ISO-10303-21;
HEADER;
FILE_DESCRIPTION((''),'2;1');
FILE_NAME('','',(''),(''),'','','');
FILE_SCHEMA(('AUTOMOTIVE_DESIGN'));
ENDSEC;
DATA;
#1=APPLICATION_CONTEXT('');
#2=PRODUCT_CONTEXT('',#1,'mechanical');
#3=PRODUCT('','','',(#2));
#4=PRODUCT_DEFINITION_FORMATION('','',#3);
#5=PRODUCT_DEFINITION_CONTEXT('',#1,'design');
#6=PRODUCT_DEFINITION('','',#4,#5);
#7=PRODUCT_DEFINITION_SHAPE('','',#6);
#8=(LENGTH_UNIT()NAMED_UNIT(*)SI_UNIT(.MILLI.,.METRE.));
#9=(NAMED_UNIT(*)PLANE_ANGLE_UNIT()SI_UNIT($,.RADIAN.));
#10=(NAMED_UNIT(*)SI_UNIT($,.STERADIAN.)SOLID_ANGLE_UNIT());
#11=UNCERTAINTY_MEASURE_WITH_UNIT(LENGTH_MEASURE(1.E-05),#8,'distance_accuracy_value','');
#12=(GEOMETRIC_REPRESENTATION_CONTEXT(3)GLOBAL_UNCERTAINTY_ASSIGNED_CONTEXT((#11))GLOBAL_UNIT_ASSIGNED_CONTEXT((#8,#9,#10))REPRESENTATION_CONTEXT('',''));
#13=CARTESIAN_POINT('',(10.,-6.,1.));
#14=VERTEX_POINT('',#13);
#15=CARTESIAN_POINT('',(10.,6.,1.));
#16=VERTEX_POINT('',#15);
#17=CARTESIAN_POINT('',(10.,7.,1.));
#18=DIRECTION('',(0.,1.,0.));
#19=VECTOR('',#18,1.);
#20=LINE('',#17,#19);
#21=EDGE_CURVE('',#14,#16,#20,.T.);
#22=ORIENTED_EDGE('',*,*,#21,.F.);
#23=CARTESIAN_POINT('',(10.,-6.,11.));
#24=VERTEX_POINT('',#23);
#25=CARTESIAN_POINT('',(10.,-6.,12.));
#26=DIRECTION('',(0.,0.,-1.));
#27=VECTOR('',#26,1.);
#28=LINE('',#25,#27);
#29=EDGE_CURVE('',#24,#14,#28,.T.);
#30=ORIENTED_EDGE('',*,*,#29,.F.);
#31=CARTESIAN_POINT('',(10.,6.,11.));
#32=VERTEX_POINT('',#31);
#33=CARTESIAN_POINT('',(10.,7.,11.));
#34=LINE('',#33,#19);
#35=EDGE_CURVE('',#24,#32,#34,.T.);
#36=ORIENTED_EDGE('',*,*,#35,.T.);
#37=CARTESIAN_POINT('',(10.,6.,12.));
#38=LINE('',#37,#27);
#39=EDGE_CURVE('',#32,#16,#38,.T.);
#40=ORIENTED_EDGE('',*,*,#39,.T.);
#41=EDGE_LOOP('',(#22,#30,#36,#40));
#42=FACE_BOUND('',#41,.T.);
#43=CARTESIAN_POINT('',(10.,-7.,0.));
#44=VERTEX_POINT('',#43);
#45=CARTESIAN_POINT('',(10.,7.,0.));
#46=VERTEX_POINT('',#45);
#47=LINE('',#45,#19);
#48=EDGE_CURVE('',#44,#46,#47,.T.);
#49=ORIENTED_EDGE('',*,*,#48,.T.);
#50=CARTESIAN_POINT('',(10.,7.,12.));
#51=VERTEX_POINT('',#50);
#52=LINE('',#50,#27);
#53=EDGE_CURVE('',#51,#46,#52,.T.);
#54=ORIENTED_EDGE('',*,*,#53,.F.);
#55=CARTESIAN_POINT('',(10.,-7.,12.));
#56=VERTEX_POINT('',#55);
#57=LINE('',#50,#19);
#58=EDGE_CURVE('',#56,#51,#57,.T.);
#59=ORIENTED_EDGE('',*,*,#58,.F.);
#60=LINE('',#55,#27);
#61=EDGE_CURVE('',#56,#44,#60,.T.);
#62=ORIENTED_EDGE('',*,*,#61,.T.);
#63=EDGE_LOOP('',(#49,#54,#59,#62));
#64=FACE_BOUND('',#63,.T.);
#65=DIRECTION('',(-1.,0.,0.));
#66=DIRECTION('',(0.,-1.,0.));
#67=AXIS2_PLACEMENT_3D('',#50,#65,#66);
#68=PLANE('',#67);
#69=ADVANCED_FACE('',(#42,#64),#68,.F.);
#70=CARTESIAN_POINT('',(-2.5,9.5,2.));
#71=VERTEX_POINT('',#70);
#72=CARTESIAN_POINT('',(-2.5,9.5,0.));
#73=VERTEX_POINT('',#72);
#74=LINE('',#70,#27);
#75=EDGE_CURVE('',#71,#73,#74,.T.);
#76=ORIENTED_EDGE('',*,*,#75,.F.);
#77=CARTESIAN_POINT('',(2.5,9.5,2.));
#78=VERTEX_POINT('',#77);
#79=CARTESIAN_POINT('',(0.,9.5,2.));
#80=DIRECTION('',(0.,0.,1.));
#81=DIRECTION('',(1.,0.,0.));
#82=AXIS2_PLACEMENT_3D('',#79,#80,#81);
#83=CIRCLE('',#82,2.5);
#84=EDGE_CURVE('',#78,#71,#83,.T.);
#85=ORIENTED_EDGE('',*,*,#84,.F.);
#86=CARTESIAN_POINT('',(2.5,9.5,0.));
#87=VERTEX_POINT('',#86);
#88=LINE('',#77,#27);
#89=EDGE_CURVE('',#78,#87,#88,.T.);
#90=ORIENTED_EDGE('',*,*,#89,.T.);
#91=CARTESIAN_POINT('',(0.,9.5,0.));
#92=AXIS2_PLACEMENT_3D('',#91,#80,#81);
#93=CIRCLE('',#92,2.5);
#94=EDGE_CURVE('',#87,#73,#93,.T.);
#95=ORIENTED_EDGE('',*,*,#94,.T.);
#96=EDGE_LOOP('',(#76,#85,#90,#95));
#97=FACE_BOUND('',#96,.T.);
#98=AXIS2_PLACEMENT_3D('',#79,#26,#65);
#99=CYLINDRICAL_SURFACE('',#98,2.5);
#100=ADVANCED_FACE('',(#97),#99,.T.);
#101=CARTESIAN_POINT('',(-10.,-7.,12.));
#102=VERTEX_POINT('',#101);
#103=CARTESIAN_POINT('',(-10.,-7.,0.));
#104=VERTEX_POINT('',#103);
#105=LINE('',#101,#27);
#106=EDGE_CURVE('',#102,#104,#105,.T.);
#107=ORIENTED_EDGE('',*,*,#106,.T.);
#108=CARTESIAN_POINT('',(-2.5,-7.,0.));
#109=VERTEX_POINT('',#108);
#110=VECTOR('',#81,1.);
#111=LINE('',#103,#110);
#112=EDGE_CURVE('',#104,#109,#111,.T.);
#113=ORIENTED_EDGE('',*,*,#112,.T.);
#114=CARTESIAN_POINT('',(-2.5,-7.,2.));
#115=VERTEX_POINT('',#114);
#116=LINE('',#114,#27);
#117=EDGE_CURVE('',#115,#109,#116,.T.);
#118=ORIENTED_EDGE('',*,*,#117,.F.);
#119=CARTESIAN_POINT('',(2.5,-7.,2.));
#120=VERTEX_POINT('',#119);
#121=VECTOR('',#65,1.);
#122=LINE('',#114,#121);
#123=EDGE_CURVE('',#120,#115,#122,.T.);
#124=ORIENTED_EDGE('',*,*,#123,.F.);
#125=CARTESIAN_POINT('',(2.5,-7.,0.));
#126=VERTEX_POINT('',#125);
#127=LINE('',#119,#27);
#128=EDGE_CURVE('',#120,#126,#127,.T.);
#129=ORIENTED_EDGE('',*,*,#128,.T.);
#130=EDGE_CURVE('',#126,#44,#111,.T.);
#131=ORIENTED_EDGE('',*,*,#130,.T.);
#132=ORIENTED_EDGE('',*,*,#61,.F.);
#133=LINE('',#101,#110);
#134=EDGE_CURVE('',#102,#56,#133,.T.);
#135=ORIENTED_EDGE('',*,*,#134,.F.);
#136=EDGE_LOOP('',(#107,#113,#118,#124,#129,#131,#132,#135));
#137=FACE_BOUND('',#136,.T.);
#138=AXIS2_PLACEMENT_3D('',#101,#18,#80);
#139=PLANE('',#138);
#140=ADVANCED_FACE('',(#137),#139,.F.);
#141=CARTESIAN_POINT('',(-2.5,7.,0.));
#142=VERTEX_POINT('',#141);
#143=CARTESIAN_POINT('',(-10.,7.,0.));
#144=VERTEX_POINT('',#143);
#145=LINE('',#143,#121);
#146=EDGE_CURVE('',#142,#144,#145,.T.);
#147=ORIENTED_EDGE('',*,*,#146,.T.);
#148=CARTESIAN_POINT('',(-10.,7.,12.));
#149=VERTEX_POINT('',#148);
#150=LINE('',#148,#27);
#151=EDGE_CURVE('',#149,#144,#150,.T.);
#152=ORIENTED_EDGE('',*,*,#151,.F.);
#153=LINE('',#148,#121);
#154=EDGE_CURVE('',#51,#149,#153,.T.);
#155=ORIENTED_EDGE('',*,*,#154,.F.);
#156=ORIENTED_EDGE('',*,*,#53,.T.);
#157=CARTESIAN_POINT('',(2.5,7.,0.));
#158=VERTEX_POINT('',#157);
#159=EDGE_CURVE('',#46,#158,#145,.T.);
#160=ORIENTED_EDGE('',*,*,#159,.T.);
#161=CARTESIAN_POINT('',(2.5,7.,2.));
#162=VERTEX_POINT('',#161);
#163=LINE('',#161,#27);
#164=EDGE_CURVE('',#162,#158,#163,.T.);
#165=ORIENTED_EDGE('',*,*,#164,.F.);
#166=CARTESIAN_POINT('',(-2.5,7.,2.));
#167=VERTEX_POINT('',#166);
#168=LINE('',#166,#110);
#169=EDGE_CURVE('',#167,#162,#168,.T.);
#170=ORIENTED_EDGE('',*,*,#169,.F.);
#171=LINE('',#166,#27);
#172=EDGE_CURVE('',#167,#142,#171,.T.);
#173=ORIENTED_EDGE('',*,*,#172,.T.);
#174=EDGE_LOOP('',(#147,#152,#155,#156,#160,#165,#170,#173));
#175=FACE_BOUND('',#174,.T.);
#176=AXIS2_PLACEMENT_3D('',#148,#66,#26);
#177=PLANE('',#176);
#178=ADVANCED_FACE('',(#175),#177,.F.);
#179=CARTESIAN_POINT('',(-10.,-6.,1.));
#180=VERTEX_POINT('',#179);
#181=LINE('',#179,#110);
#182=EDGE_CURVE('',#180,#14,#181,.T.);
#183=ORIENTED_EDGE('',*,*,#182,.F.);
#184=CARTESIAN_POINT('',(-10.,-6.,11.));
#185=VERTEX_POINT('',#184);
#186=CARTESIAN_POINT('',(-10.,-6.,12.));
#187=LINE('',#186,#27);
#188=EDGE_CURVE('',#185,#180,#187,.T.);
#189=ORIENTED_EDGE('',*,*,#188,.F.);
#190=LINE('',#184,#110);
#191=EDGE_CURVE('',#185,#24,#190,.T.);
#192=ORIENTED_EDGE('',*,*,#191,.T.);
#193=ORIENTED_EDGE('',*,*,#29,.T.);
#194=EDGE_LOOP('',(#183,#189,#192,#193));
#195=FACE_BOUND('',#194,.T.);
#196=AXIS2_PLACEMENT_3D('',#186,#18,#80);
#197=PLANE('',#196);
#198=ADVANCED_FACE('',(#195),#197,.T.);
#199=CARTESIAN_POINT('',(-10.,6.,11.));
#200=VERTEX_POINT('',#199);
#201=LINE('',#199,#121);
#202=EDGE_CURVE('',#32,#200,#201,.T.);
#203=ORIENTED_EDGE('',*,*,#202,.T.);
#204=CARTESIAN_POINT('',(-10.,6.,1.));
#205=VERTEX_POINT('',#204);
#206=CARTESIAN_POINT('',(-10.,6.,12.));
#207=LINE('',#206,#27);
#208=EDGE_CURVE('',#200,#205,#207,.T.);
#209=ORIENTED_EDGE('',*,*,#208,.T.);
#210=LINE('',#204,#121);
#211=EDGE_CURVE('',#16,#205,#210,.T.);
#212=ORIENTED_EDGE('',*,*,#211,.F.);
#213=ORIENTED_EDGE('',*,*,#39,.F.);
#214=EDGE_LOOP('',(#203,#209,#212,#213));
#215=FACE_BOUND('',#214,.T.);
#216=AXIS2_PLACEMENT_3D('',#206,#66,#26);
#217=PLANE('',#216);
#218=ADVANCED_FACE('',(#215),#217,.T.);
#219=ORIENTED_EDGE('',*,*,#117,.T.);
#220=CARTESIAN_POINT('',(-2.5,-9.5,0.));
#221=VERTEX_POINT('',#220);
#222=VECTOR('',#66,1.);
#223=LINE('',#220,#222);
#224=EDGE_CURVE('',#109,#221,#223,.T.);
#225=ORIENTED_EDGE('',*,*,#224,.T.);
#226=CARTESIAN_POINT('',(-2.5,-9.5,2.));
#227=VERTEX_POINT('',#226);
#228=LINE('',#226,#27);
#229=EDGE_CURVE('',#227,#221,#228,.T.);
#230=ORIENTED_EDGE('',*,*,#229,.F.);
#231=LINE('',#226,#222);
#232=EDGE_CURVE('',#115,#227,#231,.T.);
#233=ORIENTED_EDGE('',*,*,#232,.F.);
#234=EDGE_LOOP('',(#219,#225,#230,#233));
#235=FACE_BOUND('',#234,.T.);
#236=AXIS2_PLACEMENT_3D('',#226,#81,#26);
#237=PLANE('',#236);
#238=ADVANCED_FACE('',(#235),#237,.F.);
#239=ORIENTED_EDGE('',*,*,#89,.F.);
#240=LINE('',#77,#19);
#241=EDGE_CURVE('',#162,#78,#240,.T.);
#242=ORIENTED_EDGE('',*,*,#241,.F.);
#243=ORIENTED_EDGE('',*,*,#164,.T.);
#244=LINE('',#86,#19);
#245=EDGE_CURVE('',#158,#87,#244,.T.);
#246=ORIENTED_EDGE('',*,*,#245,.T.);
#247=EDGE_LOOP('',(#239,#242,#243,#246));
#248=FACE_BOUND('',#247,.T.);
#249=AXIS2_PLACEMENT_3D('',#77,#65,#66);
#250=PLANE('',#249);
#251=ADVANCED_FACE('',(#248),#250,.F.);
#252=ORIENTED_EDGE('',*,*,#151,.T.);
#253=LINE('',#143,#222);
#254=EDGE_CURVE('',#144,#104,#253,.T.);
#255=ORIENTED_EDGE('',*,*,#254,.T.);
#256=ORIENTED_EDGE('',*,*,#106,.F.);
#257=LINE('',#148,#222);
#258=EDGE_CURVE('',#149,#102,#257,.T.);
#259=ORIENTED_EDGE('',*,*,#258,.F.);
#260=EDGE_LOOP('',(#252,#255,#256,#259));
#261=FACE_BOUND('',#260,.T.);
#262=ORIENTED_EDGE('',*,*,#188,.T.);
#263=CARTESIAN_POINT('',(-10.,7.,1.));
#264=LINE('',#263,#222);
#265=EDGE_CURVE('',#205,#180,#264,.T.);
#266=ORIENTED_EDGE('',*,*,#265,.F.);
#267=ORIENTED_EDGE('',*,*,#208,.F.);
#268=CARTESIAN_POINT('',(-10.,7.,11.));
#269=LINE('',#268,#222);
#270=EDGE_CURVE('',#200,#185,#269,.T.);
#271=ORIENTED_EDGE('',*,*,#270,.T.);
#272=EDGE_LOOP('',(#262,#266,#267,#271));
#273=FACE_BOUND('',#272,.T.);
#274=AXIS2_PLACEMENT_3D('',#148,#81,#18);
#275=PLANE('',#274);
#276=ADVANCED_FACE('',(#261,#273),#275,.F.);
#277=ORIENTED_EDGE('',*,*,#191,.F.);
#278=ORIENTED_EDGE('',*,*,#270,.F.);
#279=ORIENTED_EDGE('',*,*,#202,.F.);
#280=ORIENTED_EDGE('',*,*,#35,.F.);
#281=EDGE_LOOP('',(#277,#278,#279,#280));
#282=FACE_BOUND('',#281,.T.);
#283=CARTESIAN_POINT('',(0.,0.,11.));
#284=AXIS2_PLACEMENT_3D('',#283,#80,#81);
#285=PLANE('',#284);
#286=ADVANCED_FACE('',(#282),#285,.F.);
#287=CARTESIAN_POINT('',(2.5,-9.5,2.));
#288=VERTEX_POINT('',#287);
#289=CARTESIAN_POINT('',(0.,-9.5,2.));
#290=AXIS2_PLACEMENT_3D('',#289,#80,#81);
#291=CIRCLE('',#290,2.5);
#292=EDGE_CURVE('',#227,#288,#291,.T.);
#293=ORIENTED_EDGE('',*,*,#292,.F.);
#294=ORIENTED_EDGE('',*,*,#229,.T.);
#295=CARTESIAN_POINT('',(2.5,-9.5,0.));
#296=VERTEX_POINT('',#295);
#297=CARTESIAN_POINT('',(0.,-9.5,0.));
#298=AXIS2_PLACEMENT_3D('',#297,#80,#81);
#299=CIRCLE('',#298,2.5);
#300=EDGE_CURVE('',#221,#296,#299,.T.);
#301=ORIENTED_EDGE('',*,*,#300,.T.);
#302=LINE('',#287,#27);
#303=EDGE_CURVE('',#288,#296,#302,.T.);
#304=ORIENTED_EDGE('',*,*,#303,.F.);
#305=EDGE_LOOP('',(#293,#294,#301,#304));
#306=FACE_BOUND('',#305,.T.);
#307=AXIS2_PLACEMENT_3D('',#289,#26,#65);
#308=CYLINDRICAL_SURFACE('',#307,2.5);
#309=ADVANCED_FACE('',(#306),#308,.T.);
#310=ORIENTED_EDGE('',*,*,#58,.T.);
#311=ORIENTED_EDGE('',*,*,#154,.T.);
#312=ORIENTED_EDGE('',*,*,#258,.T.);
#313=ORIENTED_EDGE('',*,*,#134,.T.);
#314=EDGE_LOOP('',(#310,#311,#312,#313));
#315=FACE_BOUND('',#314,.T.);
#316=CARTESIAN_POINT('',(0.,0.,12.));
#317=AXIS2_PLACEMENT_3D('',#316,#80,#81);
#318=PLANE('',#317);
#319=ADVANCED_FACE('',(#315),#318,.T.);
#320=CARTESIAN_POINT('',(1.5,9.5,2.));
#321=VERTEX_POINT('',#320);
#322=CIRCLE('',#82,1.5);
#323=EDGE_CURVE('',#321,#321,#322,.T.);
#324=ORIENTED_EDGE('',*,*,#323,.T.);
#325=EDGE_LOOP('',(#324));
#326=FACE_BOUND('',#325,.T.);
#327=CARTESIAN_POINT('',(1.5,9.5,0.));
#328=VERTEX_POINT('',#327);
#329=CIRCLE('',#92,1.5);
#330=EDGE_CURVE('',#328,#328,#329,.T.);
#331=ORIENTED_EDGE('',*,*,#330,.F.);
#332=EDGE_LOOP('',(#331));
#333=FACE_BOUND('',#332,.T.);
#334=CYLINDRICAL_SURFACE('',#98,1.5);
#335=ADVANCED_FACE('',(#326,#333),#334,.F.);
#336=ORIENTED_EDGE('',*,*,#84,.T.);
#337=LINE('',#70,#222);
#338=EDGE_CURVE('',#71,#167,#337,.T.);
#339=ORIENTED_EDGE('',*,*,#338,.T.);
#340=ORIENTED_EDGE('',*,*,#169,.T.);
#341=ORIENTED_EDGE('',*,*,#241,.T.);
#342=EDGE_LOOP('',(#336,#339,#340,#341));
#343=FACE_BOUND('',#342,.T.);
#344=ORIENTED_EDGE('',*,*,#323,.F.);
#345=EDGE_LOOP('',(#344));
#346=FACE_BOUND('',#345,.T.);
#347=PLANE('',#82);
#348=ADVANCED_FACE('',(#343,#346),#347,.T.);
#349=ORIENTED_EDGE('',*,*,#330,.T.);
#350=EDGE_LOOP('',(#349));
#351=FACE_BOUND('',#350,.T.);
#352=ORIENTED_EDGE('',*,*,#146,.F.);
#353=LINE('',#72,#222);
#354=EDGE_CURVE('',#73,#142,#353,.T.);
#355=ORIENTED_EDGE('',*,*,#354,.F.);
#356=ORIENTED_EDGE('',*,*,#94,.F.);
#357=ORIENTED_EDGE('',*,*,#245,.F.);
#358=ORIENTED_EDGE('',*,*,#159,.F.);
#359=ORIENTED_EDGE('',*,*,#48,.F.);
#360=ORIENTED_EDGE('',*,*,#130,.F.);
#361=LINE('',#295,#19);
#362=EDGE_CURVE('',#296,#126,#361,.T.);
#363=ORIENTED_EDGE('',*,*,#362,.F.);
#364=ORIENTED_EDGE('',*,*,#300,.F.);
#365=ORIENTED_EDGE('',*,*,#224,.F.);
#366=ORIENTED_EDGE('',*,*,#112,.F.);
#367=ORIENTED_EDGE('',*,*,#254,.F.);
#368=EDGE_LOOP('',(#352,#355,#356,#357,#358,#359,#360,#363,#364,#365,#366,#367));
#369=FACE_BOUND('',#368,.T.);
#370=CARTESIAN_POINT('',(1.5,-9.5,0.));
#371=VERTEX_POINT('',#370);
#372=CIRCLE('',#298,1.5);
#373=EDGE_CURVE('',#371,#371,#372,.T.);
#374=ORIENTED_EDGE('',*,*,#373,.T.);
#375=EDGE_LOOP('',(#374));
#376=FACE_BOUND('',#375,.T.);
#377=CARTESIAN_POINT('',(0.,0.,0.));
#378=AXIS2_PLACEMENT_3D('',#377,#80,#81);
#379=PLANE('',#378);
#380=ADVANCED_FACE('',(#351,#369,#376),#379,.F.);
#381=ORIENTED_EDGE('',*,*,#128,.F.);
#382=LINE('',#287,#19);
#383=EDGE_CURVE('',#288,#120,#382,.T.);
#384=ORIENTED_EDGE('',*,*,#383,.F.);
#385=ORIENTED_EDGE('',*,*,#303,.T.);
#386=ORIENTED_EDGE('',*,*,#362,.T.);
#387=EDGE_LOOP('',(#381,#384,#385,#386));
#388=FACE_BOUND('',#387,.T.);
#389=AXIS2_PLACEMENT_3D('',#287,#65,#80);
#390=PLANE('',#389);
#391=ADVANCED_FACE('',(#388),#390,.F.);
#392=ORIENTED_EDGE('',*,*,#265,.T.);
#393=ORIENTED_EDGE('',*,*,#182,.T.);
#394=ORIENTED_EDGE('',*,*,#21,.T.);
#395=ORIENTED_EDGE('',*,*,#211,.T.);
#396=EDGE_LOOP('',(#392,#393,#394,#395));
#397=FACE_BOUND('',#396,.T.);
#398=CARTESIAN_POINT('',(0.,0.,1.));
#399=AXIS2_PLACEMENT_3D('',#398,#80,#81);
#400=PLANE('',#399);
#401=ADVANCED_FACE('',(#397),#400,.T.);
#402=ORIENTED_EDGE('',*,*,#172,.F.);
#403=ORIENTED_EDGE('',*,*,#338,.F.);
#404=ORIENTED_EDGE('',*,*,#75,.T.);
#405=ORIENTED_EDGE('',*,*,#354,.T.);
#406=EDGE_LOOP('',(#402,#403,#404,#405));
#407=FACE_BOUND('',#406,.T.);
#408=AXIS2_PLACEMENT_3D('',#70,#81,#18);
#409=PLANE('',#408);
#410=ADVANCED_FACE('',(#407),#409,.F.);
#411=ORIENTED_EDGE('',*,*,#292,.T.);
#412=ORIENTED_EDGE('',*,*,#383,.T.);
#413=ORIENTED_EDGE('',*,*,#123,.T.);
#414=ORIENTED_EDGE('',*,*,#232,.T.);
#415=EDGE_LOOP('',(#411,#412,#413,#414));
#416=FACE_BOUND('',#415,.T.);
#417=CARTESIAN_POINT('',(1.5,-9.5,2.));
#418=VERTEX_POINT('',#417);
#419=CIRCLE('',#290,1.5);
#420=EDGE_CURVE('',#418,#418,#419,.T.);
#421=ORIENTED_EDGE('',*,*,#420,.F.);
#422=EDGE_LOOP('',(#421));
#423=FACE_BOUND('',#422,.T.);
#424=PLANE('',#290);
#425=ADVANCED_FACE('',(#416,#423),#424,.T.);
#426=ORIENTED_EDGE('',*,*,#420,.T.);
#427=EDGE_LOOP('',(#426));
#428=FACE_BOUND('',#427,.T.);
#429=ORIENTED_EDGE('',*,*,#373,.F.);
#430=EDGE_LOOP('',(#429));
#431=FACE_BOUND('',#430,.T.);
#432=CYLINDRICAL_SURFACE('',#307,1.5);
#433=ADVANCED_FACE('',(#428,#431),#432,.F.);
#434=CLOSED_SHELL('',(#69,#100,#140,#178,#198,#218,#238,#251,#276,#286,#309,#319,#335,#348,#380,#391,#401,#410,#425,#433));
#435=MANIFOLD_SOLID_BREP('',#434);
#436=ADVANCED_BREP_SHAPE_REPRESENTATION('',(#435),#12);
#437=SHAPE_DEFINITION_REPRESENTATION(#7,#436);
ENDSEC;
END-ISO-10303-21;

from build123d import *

# Parameters (mm, degrees)
SKETCH1_W           = 20
SKETCH1_H           = 14
BOSS_EXTRUDE1_DEPTH = 12
SKETCH2_R           = 1.5
BOSS_EXTRUDE2_DEPTH = 2
SHELL2_START        = -6
SHELL2_OUTLINE_W    = 20
SHELL2_OUTLINE_H    = 10
SHELL2_DEPTH        = 12


# Read off the part's stored shape, not the designer's step: Shell2
with BuildPart() as part:
    # Sketch1 → Boss-Extrude1 (new body)
    with BuildSketch(Plane.XY):
        Rectangle(SKETCH1_W, SKETCH1_H)
    extrude(amount=BOSS_EXTRUDE1_DEPTH)

    # Sketch2 → Boss-Extrude2 (add)
    # profile 1 of 2: a face of its own
    with BuildSketch(Plane.XY):
        with BuildLine():
            Line((2.5, -9.5), (2.5, -7))
            Line((2.5, -7), (-2.5, -7))
            Line((-2.5, -7), (-2.5, -9.5))
            ThreePointArc((-2.5, -9.5), (0, -12), (2.5, -9.5))
        make_face()
        with Locations((0, -9.5)):
            Circle(SKETCH2_R, mode=Mode.SUBTRACT)
    # profile 2 of 2: a face of its own
    with BuildSketch(Plane.XY):
        with BuildLine():
            Line((2.5, 9.5), (2.5, 7))
            Line((2.5, 7), (-2.5, 7))
            Line((-2.5, 7), (-2.5, 9.5))
            ThreePointArc((-2.5, 9.5), (0, 12), (2.5, 9.5))
        make_face()
        with Locations((0, 9.5)):
            Circle(SKETCH2_R, mode=Mode.SUBTRACT)
    extrude(amount=BOSS_EXTRUDE2_DEPTH)

    # Shell2 outline → Shell2 (cut)
    with BuildSketch(Plane(origin=(0, 0, 0), x_dir=(1, 0, 0), z_dir=(0, 1, 0)).offset(SHELL2_START)):
        with Locations((0, -6)):
            Rectangle(SHELL2_OUTLINE_W, SHELL2_OUTLINE_H)
    extrude(amount=SHELL2_DEPTH, mode=Mode.SUBTRACT)


solid = part.part
